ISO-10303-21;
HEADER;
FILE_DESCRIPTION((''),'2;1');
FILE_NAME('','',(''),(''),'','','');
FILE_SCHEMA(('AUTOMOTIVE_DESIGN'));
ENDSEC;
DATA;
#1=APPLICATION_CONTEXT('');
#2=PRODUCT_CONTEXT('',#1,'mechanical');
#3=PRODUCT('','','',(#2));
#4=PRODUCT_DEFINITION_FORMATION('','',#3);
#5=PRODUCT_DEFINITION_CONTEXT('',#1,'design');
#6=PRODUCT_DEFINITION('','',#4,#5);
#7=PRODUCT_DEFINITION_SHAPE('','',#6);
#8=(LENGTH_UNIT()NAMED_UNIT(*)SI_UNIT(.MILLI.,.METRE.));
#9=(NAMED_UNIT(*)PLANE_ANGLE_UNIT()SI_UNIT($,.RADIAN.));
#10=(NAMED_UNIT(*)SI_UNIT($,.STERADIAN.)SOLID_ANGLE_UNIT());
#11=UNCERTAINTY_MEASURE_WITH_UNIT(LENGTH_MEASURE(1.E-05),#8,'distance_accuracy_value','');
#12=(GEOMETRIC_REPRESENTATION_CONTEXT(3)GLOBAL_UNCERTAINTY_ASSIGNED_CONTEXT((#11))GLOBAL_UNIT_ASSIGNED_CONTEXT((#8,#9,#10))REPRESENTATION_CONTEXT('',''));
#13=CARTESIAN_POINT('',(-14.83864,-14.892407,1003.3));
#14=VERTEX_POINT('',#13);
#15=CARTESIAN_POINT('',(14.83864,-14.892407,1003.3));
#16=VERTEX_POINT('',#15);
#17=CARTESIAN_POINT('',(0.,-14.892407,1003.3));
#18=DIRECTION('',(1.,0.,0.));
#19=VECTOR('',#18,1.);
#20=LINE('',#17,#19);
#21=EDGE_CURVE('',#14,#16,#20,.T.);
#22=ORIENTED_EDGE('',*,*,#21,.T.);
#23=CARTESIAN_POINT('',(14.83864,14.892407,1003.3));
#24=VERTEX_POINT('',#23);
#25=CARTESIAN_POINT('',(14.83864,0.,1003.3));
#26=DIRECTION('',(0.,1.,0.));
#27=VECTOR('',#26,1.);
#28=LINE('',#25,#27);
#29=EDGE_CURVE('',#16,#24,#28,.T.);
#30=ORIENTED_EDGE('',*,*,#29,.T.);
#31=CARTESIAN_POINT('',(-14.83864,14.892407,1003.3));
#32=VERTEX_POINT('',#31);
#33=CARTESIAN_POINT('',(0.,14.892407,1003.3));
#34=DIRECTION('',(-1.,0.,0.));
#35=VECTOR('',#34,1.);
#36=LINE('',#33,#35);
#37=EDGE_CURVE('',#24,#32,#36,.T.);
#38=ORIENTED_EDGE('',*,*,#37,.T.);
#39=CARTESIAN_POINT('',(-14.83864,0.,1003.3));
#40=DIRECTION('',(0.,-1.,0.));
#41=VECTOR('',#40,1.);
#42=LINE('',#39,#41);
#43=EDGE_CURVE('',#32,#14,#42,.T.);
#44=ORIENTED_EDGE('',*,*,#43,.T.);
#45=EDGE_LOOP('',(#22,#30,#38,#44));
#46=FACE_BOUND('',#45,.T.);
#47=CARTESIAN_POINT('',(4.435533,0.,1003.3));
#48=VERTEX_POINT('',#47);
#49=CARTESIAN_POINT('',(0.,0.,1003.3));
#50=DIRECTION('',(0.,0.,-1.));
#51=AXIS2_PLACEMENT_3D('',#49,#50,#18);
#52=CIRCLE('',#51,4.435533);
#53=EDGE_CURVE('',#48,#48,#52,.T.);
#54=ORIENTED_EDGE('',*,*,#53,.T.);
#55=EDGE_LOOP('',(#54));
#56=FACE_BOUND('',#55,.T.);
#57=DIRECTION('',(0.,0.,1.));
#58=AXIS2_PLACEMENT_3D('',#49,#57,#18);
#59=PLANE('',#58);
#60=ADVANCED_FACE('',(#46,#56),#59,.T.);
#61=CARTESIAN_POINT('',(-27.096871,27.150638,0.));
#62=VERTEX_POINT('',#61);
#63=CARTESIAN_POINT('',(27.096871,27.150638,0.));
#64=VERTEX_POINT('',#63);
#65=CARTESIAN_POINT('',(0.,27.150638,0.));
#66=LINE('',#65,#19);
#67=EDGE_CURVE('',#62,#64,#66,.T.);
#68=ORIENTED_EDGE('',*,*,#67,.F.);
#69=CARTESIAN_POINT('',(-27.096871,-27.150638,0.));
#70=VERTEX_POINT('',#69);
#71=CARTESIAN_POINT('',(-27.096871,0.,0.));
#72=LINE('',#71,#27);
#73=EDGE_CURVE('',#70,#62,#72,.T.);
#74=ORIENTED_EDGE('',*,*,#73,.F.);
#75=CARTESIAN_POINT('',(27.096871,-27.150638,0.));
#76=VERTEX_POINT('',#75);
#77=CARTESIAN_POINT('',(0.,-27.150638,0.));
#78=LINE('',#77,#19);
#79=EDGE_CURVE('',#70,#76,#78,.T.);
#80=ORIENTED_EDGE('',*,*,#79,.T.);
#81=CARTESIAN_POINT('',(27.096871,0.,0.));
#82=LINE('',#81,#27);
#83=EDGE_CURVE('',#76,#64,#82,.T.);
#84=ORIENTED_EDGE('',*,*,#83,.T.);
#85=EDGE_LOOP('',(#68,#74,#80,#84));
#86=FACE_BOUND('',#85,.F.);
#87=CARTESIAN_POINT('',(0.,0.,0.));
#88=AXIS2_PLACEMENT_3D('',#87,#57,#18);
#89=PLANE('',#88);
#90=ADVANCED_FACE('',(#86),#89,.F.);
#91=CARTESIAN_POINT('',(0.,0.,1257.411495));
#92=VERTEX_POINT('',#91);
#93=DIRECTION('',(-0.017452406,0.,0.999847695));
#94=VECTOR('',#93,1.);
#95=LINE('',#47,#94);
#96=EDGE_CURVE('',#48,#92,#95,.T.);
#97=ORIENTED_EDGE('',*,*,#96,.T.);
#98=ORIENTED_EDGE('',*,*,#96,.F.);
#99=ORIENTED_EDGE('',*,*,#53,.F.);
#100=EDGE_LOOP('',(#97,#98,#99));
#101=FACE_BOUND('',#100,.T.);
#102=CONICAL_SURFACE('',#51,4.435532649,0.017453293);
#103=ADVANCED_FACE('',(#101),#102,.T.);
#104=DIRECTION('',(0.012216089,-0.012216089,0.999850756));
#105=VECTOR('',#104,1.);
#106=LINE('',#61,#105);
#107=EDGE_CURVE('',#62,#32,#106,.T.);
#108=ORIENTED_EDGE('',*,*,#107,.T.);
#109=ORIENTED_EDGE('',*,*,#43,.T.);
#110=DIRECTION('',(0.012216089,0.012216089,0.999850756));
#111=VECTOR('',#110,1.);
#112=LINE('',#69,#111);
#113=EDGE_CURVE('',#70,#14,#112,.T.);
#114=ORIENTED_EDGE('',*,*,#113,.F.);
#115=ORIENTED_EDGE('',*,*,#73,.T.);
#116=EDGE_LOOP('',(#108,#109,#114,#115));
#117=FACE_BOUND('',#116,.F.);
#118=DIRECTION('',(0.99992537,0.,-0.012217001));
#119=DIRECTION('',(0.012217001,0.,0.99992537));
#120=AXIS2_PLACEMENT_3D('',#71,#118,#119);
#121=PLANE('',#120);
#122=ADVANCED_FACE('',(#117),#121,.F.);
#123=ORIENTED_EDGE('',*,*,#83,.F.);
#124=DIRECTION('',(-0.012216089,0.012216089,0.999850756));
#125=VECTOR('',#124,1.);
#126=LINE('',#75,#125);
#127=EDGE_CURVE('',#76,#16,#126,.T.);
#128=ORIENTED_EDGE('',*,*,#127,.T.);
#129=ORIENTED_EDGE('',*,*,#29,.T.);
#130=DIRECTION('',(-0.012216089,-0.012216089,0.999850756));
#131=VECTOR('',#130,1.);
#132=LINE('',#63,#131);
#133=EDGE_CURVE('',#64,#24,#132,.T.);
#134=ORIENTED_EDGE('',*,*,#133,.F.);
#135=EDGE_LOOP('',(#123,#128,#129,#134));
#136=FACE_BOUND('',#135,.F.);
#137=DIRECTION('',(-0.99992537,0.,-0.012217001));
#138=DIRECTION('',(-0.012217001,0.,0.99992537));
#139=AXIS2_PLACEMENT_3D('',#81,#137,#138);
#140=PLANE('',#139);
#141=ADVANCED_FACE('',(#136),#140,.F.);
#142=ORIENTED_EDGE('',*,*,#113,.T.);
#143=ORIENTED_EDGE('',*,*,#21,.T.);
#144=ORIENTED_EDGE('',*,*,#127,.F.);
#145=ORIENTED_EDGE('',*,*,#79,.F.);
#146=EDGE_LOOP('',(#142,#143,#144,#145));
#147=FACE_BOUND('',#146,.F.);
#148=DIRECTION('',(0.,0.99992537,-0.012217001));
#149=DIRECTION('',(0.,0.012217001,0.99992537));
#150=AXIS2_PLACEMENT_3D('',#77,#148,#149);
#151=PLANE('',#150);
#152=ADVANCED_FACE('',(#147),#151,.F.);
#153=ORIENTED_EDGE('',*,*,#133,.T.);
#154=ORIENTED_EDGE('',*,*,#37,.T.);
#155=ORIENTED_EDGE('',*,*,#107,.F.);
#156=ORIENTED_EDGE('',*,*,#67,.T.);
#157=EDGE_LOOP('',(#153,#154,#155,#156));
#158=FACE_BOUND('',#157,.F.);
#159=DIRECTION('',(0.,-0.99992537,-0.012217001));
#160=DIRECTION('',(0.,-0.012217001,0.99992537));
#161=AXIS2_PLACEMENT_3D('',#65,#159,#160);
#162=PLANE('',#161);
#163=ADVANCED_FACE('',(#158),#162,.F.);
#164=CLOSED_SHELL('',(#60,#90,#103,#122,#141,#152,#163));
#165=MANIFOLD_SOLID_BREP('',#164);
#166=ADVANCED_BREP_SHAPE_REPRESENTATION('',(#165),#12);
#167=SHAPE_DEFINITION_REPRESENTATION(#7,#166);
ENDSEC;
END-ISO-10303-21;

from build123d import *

# Parameters (mm, degrees)
F0_W     = 54.1937425733
F0_H     = 54.301276803
F1_DEPTH = 1003.3
F1_TAPER = 0.7
F2_R     = 4.4355326491
F3_DEPTH = 630.428
F3_TAPER = 1


# Not quite as in the source:
# - a feature names something its author has since deleted; it is built from what else it names


with BuildPart() as f1:
    # F0 (on Top) → F1 (new body)
    with BuildSketch(Plane.XY):
        Rectangle(F0_W, F0_H)
    extrude(amount=F1_DEPTH, taper=F1_TAPER)

    # F2 (on face) → F3 (join)
    with BuildSketch(Plane.XY.offset(1003.3)):
        Circle(F2_R)
    extrude(amount=F3_DEPTH, taper=F3_TAPER)


solid = f1.part
